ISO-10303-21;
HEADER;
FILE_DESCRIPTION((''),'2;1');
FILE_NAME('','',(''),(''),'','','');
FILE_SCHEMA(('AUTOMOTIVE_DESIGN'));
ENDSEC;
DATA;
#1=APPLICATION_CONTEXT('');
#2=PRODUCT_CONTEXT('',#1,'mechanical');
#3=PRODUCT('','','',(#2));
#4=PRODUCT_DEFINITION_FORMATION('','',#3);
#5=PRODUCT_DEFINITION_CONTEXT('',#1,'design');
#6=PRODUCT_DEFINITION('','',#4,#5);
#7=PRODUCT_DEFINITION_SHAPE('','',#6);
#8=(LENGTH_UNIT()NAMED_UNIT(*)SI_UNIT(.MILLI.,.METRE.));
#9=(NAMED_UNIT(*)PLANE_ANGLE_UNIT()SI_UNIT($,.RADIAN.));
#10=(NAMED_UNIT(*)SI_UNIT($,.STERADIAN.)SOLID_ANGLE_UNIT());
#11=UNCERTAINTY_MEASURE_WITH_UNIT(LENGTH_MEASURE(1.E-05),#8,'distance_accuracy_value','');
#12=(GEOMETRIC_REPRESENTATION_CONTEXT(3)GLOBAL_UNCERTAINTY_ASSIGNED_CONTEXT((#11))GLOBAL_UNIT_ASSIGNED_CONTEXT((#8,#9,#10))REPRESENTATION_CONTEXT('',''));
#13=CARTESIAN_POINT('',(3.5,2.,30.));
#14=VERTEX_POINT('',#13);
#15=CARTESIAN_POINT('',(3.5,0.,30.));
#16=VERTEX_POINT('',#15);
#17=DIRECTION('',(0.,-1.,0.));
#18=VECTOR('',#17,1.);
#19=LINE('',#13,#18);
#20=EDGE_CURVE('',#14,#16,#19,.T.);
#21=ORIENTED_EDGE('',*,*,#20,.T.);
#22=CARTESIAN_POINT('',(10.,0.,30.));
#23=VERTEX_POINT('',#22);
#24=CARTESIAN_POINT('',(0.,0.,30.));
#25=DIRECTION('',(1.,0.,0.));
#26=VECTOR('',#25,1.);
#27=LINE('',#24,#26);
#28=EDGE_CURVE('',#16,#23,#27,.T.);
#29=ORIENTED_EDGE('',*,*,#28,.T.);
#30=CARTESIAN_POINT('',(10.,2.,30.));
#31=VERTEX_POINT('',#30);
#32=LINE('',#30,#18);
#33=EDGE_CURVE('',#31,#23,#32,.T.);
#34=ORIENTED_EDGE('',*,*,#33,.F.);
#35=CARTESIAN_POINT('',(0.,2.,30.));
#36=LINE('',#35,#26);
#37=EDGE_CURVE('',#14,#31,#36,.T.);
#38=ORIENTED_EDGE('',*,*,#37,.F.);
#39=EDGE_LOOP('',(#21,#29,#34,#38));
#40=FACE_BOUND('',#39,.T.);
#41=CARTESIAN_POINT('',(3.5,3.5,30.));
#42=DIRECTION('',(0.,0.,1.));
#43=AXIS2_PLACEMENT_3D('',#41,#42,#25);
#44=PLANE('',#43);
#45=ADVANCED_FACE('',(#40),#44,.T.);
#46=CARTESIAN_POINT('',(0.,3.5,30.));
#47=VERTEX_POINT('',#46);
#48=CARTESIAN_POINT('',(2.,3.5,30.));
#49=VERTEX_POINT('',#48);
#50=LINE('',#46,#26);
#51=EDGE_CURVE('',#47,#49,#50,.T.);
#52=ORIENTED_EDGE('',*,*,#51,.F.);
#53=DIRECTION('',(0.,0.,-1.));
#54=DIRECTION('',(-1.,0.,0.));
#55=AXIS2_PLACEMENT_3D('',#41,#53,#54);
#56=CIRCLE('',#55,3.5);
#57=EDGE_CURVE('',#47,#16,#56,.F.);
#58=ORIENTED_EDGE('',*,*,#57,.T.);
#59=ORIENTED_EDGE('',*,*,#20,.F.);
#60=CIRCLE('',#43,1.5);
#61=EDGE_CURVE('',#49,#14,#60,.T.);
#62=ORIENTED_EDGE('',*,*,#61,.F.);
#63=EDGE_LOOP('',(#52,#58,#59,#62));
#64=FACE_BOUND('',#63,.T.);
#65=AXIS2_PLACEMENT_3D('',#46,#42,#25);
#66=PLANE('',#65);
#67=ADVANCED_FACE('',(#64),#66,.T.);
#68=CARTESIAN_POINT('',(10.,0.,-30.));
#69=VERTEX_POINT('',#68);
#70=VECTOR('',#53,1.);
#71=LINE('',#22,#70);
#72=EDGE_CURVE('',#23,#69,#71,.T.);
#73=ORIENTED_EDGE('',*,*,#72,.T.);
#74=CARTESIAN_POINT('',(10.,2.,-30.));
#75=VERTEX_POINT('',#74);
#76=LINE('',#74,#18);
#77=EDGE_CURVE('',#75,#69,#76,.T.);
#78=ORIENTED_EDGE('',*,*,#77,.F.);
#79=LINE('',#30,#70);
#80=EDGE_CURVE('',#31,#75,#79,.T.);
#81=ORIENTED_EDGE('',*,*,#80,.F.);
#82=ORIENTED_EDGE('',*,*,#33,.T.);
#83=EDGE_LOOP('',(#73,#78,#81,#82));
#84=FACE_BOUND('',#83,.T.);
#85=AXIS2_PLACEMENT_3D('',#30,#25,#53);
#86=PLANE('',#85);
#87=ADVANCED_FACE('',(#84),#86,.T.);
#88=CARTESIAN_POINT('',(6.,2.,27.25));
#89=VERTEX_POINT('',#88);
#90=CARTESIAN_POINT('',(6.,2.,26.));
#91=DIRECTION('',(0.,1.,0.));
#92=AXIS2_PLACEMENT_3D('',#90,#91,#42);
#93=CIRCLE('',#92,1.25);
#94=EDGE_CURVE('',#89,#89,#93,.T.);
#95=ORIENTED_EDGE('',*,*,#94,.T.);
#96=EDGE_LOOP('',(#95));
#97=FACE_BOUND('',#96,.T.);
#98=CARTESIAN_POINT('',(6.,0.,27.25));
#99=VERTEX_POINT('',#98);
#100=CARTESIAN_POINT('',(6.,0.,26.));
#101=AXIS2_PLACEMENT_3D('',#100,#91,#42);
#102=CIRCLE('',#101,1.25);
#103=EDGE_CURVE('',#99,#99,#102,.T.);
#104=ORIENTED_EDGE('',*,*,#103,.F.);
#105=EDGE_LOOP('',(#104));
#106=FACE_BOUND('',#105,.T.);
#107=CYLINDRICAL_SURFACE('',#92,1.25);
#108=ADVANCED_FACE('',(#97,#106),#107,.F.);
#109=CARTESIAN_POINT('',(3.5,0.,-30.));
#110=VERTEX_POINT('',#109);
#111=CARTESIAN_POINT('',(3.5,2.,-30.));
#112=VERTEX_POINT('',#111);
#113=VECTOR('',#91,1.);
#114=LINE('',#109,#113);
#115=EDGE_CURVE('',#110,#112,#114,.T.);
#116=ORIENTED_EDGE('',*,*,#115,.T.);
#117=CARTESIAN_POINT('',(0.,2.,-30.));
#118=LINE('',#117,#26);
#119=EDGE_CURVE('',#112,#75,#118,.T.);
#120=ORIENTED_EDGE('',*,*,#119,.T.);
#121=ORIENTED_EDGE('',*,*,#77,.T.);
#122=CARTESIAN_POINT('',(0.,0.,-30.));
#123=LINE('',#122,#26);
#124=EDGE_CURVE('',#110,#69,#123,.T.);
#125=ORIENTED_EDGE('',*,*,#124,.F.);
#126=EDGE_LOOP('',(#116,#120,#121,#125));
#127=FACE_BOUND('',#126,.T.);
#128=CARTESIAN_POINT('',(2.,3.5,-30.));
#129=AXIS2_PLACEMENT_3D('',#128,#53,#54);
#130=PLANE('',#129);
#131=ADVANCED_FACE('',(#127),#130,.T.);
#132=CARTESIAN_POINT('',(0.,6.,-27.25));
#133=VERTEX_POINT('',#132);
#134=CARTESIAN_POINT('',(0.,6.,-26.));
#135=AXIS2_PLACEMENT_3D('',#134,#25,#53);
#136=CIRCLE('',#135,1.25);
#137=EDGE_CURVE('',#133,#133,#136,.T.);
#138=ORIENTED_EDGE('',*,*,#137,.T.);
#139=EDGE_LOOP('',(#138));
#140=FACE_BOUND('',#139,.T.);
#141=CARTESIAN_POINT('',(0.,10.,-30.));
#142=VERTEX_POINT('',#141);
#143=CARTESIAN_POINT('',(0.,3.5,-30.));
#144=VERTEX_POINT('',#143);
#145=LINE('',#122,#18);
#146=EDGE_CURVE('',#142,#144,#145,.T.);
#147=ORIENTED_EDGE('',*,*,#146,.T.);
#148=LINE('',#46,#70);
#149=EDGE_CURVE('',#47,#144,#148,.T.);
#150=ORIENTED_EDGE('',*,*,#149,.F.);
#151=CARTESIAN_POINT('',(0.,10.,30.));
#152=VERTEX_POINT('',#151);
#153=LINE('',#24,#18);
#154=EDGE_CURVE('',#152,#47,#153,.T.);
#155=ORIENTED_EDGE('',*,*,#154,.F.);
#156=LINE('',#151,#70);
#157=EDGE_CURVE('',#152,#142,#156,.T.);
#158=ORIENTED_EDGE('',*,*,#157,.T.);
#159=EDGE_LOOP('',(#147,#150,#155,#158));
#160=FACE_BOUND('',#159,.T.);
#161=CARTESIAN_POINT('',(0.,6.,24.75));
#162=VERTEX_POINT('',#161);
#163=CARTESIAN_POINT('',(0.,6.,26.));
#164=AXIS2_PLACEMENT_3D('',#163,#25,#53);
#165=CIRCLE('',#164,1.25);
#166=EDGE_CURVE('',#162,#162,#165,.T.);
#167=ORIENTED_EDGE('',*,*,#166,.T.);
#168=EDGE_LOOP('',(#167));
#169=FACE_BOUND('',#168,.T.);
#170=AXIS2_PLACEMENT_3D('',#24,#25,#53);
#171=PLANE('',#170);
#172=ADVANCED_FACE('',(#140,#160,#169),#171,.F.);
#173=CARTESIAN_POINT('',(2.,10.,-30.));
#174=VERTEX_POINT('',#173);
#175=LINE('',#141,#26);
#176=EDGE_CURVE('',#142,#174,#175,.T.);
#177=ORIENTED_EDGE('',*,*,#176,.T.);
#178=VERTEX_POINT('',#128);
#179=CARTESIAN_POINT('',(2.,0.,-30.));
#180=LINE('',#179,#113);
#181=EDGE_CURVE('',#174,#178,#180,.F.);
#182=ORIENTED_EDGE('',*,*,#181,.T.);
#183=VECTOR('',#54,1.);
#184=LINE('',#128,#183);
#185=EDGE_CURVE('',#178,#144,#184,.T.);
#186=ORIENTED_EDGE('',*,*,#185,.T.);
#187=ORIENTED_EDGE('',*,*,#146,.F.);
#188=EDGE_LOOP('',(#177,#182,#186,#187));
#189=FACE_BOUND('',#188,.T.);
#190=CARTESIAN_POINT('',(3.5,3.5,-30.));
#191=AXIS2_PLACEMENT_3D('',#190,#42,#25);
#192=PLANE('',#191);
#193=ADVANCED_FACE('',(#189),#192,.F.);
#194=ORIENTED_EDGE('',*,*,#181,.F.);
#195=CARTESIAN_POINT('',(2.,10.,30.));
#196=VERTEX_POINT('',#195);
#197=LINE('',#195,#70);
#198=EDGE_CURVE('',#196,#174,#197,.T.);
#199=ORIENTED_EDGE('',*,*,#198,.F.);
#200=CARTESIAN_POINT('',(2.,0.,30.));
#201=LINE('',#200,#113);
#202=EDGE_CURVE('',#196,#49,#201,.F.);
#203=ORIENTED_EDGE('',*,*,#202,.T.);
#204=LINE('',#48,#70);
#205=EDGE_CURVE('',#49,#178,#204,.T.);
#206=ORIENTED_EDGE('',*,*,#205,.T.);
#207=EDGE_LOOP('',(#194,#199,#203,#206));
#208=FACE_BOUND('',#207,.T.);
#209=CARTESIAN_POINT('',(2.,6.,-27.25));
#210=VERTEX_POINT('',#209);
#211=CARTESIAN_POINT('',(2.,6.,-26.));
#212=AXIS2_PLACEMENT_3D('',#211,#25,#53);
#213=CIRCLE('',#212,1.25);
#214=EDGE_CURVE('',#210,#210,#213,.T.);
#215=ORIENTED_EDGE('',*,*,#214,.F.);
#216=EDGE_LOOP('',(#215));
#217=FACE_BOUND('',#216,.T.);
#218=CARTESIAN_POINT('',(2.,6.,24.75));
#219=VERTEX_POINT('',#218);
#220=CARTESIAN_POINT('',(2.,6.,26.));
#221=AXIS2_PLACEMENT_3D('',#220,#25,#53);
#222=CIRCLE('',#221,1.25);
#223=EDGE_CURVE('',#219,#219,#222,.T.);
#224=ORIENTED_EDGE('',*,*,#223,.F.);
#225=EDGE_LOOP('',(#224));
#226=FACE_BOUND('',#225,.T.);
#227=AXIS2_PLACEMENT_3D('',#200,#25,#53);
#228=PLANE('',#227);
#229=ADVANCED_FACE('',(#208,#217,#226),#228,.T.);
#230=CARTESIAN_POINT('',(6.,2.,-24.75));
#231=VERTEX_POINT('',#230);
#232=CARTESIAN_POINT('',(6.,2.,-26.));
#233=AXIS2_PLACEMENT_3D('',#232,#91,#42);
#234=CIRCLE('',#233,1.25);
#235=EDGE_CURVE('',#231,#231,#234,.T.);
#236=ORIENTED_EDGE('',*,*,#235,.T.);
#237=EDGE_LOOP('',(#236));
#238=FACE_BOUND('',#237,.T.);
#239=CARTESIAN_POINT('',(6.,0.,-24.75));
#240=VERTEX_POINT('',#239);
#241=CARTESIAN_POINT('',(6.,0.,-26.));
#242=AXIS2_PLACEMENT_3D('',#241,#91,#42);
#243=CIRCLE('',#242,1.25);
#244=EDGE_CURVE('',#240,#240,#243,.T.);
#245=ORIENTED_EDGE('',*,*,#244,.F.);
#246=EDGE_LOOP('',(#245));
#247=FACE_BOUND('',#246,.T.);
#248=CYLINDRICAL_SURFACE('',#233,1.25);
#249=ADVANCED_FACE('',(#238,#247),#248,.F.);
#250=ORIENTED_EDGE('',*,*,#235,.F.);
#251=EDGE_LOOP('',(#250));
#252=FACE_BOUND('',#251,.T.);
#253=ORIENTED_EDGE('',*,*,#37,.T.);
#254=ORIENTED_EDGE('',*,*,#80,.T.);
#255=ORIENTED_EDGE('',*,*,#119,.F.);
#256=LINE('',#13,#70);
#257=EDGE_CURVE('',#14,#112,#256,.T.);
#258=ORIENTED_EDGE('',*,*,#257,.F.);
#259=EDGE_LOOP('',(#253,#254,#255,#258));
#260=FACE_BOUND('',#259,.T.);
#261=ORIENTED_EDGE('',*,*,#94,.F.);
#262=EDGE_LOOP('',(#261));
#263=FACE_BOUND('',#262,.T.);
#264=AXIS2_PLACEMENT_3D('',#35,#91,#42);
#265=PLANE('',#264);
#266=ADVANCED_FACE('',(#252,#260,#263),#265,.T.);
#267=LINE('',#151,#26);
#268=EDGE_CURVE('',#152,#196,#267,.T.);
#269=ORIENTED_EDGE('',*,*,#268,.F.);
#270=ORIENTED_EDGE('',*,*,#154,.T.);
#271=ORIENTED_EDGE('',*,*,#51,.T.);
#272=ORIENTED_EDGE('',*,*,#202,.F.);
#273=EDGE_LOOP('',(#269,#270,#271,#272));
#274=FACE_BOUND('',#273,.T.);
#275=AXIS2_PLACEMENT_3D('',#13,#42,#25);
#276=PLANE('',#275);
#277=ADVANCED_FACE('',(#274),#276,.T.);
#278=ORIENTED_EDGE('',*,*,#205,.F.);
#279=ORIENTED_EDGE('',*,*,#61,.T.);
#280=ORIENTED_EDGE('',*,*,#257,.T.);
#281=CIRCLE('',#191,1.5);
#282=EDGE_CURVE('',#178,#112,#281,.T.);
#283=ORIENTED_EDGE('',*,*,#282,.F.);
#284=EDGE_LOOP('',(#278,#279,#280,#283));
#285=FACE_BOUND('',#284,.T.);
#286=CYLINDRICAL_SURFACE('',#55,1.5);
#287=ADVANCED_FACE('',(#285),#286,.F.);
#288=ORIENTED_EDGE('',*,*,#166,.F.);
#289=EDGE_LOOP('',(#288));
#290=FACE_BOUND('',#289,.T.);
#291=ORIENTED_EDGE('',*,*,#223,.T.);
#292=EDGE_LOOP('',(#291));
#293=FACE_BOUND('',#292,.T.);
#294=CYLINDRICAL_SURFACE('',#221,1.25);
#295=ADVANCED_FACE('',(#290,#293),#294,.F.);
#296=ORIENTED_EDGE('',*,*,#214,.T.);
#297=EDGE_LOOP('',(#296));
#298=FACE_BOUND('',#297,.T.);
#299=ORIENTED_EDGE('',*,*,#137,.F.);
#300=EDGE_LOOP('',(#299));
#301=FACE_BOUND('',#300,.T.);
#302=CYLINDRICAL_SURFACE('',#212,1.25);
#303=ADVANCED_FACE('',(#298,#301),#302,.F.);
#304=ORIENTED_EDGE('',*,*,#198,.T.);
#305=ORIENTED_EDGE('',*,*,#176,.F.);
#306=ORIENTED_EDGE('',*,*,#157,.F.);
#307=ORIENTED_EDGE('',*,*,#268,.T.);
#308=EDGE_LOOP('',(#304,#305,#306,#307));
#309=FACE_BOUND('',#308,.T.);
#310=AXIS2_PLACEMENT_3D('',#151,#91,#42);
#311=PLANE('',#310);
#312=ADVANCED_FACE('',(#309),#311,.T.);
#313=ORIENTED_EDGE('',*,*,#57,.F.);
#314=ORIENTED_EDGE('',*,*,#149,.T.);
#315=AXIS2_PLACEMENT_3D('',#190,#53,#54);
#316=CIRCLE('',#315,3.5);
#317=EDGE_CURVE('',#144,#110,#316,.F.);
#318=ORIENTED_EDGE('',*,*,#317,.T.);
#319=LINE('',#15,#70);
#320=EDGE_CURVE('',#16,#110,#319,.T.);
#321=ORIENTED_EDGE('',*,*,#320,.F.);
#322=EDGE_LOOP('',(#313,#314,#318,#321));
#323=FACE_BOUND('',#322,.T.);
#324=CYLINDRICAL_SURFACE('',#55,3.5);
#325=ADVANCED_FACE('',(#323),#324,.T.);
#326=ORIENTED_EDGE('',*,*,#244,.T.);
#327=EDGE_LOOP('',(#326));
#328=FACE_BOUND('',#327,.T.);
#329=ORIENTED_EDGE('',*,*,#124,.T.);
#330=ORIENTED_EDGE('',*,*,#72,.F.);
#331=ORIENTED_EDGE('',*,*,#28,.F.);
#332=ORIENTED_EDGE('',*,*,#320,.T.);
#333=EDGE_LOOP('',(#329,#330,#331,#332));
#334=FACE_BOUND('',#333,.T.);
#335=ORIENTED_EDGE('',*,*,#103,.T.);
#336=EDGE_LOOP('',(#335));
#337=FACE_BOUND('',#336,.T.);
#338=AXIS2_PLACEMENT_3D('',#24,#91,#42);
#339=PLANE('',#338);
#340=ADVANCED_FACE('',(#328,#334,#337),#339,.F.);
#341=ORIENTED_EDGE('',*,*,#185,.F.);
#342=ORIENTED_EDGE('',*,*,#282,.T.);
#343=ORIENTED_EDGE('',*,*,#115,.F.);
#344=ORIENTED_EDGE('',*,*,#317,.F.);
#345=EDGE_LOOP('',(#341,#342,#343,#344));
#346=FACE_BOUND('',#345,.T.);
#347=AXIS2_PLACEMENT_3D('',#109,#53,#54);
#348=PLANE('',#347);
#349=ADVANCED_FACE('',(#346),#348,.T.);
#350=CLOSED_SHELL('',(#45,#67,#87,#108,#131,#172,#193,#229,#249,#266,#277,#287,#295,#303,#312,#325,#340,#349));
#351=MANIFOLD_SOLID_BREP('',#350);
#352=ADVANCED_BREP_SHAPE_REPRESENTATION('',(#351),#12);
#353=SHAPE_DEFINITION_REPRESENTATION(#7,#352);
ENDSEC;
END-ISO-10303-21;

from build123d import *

# Parameters (mm, degrees)
BASE_FLANGE1_DEPTH = 30
M3_TAPPED_HOLE1_D  = 2.5
M3_TAPPED_HOLE2_D  = 2.5


# Sheet-metal steps are written as plain solids
with BuildPart() as part:
    # Sketch1 → Base-Flange1 (new, symmetric)
    with BuildSketch(Plane.XY):
        with BuildLine():
            Line((10, 0), (3.5, 0))
            ThreePointArc((3.5, 0), (1.025126266, 1.025126266), (0, 3.5))
            Line((0, 3.5), (0, 10))
            Line((0, 10), (2, 10))
            Line((2, 10), (2, 3.5))
            ThreePointArc((2, 3.5), (2.439339828, 2.439339828), (3.5, 2))
            Line((3.5, 2), (10, 2))
            Line((10, 2), (10, 0))
        make_face()
    extrude(amount=BASE_FLANGE1_DEPTH, both=True)

    # M3 Tapped Hole1 (through all)
    with Locations(Plane(origin=(2, 0, 0), x_dir=(0, 0, -1), z_dir=(1, 0, 0))):
        with Locations((-26, 6), (26, 6)):
            Hole(M3_TAPPED_HOLE1_D / 2)

    # M3 Tapped Hole2 (through all)
    with Locations(Plane(origin=(0, 2, 0), x_dir=(1, 0, 0), z_dir=(0, 1, 0))):
        with Locations((6, -26), (6, 26)):
            Hole(M3_TAPPED_HOLE2_D / 2)


solid = part.part
